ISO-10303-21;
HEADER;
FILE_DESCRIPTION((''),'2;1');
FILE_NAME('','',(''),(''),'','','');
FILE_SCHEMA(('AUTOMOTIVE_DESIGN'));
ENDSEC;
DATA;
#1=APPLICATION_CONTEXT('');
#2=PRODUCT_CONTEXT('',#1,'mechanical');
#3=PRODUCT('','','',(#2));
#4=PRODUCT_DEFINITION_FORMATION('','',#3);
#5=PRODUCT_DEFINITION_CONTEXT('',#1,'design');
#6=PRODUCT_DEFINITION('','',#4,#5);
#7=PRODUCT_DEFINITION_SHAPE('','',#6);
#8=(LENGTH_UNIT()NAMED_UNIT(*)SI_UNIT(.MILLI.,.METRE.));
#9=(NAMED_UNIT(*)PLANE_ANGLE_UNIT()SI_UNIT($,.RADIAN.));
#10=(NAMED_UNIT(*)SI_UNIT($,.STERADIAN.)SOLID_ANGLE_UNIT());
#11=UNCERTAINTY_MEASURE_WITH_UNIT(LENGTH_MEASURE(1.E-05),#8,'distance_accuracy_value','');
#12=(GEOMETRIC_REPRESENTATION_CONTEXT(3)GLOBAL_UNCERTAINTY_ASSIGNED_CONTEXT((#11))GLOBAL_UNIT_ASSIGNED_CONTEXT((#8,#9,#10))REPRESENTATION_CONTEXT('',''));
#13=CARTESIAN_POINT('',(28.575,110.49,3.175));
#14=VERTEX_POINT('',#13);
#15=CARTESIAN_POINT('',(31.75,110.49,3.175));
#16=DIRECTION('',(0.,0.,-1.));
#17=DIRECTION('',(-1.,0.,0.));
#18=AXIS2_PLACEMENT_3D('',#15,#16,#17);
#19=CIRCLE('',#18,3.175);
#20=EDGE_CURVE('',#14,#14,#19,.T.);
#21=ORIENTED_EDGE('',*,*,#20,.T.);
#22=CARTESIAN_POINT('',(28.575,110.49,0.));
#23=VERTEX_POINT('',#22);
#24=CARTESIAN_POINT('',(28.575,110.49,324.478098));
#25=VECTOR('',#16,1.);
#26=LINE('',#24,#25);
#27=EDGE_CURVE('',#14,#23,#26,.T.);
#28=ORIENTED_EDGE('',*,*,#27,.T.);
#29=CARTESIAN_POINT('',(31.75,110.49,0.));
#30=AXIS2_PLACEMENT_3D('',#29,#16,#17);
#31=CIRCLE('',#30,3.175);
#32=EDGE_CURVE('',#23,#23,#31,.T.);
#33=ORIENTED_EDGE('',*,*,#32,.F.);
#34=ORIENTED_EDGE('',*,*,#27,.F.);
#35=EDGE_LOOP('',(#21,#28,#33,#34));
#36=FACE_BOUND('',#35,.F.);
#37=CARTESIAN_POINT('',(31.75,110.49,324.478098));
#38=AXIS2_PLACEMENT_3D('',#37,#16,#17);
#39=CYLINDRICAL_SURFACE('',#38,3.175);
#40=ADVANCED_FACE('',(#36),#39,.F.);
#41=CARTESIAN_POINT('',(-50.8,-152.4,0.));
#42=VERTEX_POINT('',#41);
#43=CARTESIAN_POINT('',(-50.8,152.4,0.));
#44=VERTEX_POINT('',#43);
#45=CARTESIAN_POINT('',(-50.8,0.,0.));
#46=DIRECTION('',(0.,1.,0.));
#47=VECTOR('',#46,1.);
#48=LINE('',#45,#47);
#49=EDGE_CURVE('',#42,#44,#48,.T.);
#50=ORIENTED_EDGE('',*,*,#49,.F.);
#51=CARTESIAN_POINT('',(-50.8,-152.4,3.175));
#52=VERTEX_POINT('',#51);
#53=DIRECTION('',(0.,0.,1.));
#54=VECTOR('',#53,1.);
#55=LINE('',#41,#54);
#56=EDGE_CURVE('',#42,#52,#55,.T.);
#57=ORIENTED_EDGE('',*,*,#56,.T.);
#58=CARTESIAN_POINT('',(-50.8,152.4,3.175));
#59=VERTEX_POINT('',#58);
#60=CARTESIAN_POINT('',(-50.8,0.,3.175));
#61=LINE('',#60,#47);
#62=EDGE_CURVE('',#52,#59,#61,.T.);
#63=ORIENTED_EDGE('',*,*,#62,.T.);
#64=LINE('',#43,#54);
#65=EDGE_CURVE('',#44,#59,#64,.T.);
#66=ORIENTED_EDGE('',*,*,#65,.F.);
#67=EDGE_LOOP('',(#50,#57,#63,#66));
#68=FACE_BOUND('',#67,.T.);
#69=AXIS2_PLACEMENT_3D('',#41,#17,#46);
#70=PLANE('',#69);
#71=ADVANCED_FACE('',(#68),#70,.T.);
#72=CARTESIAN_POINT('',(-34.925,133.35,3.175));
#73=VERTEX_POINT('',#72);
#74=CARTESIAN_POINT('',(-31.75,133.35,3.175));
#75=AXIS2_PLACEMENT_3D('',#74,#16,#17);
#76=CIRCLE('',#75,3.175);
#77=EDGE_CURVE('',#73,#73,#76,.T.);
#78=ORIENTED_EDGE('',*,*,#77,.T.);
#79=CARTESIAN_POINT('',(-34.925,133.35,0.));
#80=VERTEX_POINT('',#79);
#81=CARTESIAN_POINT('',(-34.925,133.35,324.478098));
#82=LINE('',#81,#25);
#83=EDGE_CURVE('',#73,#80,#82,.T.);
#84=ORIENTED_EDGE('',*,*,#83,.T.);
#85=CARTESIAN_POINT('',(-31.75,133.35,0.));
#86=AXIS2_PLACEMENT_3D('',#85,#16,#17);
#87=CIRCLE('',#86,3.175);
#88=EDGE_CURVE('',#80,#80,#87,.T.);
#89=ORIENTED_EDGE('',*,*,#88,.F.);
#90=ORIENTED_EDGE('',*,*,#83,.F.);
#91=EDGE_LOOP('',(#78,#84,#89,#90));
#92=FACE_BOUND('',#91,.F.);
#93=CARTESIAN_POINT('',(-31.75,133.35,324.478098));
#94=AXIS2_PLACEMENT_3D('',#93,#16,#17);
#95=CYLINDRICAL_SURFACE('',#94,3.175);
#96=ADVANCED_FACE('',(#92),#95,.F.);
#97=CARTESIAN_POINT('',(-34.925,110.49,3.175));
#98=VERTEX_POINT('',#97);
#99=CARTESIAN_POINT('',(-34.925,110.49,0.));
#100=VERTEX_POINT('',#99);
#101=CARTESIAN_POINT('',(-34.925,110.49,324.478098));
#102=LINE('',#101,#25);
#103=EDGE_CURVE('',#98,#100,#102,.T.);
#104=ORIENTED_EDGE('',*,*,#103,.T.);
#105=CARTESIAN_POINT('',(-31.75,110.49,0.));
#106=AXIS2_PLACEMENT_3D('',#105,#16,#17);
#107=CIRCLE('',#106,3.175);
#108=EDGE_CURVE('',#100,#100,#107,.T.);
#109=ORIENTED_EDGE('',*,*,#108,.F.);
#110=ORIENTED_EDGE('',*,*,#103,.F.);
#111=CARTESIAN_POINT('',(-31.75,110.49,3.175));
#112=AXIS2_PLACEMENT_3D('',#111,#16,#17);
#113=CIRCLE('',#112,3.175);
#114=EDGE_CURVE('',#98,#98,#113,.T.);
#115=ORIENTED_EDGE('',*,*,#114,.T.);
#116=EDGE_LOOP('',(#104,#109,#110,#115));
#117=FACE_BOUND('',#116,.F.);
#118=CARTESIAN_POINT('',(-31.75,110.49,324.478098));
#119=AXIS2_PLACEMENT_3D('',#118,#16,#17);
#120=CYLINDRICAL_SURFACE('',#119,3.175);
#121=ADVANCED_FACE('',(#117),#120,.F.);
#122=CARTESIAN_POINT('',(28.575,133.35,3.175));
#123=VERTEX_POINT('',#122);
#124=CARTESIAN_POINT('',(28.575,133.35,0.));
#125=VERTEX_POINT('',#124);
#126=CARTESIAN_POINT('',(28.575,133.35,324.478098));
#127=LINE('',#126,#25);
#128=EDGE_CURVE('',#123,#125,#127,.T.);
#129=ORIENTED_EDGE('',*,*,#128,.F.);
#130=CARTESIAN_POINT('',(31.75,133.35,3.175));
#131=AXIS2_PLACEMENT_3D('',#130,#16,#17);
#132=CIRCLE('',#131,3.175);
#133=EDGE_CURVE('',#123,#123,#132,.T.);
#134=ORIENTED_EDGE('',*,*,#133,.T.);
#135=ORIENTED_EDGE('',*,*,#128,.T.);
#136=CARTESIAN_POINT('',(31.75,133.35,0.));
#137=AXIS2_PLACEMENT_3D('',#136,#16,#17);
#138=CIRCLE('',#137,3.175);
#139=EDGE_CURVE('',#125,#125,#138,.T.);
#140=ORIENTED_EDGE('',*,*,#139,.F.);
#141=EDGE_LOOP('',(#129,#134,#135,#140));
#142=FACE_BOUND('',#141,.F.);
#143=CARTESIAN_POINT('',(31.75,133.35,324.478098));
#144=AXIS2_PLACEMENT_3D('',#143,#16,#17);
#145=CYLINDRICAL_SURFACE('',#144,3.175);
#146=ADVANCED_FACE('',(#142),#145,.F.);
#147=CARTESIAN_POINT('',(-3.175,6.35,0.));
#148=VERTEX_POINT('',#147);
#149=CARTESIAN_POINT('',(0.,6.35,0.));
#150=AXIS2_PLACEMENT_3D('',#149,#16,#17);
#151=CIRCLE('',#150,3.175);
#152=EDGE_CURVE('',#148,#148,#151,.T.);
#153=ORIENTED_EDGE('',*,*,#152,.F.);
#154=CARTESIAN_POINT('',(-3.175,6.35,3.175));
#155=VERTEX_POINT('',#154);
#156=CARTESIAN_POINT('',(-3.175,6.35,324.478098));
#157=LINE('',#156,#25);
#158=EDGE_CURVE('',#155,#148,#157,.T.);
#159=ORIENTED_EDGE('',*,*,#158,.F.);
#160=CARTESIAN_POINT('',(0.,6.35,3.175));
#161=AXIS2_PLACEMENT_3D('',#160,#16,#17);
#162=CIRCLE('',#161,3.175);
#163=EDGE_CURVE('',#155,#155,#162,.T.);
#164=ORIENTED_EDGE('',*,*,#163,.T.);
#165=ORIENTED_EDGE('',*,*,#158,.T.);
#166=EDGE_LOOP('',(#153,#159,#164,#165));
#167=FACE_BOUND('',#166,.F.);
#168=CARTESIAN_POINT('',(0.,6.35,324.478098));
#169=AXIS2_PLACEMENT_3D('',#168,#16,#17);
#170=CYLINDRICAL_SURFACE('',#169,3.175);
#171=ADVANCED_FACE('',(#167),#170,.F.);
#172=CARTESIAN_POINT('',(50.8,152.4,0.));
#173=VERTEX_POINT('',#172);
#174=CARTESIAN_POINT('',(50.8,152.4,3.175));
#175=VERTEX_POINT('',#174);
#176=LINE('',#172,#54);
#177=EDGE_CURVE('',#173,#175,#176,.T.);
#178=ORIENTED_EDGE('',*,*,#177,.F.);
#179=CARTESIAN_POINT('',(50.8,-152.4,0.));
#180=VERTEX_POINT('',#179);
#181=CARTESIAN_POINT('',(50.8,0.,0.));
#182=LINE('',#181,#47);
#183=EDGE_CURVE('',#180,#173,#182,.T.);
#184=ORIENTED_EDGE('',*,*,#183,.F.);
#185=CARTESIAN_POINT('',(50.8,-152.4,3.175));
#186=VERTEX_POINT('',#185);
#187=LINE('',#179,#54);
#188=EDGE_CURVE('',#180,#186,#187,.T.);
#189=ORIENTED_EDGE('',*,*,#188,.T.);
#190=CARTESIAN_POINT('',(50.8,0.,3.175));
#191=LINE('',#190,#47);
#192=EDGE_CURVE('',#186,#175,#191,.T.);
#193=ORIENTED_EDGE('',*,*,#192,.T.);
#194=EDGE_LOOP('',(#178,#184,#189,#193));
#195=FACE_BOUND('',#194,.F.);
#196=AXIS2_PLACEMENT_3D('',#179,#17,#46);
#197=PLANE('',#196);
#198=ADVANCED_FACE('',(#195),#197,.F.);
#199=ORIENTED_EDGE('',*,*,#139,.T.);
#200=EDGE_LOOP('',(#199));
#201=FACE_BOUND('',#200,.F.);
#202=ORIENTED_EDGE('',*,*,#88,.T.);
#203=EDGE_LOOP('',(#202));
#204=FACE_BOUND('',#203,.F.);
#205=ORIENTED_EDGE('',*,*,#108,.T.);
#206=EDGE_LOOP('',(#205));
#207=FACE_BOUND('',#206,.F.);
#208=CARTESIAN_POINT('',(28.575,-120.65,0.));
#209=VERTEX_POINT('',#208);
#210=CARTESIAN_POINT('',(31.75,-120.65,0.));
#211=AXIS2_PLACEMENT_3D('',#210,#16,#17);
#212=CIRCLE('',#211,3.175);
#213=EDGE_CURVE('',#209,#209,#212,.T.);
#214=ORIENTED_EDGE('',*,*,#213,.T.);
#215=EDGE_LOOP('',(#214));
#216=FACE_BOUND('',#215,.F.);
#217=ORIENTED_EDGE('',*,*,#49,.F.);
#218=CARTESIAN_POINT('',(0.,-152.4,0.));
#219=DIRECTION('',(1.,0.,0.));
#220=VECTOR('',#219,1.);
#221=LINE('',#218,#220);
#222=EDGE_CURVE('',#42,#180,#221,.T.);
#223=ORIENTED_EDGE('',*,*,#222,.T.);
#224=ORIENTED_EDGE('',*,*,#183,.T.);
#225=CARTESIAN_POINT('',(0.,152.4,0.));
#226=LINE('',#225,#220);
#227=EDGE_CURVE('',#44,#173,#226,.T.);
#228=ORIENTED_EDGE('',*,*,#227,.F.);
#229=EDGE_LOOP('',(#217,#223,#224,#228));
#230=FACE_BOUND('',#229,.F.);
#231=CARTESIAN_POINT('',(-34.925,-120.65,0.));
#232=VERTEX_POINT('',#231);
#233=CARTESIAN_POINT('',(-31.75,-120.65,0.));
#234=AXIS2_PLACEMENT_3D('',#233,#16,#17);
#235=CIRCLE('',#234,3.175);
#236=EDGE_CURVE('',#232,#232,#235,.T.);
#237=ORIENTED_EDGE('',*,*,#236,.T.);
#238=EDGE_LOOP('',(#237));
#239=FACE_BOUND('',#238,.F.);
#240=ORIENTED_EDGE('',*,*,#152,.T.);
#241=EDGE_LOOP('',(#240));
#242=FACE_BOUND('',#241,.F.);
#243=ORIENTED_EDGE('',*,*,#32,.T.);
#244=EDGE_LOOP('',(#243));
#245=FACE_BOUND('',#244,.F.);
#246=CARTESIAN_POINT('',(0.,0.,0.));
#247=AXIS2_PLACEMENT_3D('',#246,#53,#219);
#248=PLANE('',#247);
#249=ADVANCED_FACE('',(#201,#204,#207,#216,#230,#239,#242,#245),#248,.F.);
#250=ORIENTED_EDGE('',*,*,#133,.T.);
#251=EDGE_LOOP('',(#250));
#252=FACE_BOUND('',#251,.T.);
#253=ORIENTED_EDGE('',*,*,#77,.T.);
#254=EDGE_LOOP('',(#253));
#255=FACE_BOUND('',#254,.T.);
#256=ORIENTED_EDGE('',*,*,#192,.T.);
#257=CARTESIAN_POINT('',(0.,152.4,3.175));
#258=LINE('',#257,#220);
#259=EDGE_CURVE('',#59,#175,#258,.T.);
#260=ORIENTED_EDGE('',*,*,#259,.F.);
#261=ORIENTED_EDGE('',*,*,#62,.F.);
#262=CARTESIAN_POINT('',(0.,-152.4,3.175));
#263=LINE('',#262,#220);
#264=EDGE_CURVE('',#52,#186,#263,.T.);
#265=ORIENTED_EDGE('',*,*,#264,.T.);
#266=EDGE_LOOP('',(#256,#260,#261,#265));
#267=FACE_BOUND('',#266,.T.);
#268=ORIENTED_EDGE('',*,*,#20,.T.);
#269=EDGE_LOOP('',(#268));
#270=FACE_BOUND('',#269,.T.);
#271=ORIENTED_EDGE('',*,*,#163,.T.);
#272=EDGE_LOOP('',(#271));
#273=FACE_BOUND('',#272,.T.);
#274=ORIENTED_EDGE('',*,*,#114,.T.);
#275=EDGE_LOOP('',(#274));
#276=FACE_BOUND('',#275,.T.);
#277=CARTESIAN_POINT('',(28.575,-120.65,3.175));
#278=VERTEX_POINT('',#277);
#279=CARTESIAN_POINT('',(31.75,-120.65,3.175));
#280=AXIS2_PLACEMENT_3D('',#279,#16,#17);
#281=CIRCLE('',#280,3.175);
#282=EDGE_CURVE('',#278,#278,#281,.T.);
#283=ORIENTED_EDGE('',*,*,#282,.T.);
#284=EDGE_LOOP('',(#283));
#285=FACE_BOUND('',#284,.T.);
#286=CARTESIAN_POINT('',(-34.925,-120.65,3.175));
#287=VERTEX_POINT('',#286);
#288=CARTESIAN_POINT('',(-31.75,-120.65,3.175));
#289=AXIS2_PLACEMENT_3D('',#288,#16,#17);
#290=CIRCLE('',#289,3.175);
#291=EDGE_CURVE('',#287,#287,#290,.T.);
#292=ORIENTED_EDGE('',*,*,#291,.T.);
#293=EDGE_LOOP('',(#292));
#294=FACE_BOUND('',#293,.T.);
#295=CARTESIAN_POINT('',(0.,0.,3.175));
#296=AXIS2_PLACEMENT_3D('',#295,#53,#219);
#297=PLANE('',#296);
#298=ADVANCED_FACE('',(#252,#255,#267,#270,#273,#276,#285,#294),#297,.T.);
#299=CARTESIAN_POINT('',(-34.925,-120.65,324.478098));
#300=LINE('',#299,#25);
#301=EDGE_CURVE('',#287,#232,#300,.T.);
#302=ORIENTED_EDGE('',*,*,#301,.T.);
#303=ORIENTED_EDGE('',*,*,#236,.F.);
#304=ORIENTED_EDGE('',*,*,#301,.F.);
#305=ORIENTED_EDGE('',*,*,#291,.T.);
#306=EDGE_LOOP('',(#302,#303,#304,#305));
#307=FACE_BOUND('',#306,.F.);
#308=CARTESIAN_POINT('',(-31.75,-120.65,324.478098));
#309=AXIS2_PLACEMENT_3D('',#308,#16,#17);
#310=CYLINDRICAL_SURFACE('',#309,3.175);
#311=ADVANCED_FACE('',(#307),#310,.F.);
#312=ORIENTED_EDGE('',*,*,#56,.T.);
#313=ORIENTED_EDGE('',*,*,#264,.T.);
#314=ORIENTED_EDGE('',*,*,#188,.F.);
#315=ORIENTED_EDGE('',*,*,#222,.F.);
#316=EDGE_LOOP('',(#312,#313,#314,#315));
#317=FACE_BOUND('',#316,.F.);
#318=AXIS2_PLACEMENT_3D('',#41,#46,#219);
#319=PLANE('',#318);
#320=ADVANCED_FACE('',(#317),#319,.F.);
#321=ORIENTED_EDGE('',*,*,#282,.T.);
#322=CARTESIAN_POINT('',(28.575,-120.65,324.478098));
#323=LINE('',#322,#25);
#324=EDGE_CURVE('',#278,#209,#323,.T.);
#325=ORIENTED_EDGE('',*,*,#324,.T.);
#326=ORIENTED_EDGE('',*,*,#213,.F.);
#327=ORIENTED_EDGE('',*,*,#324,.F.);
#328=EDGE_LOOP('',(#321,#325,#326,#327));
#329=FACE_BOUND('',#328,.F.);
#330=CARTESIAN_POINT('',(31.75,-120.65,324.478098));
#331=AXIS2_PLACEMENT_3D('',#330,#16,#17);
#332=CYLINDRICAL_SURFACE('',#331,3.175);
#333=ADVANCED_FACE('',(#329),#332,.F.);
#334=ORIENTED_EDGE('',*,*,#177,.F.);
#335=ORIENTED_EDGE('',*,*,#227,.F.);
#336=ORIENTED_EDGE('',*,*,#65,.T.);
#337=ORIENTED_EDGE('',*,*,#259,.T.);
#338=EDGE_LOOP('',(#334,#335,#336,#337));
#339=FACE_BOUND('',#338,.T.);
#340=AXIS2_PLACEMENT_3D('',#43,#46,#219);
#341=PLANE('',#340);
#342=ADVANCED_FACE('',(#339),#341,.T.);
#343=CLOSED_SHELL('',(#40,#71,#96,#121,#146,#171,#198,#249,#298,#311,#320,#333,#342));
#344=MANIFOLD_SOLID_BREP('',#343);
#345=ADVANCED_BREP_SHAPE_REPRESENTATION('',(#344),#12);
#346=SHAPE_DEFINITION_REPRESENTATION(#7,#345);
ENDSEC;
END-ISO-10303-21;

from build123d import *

# Parameters (mm, degrees)
F0_W     = 101.6
F0_H     = 304.8
F1_DEPTH = 3.175
F3_D     = 6.35


# Not quite as in the source:
# - a length typed as a fraction of an inch, garbled in the dataset ("3 / 203.2 mm" for 3/8 in), is restored


with BuildPart() as f1:
    # F0 (on Top) → F1 (new body)
    with BuildSketch(Plane.XY):
        Rectangle(F0_W, F0_H)
    extrude(amount=F1_DEPTH)

    # F3 (through all)
    with Locations(Plane.XY.offset(3.175)):
        with Locations((-31.75, 133.35), (31.75, 133.35), (31.75, -120.65), (-31.75, -120.65), (0, 6.35), (-31.75, 110.49), (31.75, 110.49)):
            Hole(F3_D / 2)


solid = f1.part
